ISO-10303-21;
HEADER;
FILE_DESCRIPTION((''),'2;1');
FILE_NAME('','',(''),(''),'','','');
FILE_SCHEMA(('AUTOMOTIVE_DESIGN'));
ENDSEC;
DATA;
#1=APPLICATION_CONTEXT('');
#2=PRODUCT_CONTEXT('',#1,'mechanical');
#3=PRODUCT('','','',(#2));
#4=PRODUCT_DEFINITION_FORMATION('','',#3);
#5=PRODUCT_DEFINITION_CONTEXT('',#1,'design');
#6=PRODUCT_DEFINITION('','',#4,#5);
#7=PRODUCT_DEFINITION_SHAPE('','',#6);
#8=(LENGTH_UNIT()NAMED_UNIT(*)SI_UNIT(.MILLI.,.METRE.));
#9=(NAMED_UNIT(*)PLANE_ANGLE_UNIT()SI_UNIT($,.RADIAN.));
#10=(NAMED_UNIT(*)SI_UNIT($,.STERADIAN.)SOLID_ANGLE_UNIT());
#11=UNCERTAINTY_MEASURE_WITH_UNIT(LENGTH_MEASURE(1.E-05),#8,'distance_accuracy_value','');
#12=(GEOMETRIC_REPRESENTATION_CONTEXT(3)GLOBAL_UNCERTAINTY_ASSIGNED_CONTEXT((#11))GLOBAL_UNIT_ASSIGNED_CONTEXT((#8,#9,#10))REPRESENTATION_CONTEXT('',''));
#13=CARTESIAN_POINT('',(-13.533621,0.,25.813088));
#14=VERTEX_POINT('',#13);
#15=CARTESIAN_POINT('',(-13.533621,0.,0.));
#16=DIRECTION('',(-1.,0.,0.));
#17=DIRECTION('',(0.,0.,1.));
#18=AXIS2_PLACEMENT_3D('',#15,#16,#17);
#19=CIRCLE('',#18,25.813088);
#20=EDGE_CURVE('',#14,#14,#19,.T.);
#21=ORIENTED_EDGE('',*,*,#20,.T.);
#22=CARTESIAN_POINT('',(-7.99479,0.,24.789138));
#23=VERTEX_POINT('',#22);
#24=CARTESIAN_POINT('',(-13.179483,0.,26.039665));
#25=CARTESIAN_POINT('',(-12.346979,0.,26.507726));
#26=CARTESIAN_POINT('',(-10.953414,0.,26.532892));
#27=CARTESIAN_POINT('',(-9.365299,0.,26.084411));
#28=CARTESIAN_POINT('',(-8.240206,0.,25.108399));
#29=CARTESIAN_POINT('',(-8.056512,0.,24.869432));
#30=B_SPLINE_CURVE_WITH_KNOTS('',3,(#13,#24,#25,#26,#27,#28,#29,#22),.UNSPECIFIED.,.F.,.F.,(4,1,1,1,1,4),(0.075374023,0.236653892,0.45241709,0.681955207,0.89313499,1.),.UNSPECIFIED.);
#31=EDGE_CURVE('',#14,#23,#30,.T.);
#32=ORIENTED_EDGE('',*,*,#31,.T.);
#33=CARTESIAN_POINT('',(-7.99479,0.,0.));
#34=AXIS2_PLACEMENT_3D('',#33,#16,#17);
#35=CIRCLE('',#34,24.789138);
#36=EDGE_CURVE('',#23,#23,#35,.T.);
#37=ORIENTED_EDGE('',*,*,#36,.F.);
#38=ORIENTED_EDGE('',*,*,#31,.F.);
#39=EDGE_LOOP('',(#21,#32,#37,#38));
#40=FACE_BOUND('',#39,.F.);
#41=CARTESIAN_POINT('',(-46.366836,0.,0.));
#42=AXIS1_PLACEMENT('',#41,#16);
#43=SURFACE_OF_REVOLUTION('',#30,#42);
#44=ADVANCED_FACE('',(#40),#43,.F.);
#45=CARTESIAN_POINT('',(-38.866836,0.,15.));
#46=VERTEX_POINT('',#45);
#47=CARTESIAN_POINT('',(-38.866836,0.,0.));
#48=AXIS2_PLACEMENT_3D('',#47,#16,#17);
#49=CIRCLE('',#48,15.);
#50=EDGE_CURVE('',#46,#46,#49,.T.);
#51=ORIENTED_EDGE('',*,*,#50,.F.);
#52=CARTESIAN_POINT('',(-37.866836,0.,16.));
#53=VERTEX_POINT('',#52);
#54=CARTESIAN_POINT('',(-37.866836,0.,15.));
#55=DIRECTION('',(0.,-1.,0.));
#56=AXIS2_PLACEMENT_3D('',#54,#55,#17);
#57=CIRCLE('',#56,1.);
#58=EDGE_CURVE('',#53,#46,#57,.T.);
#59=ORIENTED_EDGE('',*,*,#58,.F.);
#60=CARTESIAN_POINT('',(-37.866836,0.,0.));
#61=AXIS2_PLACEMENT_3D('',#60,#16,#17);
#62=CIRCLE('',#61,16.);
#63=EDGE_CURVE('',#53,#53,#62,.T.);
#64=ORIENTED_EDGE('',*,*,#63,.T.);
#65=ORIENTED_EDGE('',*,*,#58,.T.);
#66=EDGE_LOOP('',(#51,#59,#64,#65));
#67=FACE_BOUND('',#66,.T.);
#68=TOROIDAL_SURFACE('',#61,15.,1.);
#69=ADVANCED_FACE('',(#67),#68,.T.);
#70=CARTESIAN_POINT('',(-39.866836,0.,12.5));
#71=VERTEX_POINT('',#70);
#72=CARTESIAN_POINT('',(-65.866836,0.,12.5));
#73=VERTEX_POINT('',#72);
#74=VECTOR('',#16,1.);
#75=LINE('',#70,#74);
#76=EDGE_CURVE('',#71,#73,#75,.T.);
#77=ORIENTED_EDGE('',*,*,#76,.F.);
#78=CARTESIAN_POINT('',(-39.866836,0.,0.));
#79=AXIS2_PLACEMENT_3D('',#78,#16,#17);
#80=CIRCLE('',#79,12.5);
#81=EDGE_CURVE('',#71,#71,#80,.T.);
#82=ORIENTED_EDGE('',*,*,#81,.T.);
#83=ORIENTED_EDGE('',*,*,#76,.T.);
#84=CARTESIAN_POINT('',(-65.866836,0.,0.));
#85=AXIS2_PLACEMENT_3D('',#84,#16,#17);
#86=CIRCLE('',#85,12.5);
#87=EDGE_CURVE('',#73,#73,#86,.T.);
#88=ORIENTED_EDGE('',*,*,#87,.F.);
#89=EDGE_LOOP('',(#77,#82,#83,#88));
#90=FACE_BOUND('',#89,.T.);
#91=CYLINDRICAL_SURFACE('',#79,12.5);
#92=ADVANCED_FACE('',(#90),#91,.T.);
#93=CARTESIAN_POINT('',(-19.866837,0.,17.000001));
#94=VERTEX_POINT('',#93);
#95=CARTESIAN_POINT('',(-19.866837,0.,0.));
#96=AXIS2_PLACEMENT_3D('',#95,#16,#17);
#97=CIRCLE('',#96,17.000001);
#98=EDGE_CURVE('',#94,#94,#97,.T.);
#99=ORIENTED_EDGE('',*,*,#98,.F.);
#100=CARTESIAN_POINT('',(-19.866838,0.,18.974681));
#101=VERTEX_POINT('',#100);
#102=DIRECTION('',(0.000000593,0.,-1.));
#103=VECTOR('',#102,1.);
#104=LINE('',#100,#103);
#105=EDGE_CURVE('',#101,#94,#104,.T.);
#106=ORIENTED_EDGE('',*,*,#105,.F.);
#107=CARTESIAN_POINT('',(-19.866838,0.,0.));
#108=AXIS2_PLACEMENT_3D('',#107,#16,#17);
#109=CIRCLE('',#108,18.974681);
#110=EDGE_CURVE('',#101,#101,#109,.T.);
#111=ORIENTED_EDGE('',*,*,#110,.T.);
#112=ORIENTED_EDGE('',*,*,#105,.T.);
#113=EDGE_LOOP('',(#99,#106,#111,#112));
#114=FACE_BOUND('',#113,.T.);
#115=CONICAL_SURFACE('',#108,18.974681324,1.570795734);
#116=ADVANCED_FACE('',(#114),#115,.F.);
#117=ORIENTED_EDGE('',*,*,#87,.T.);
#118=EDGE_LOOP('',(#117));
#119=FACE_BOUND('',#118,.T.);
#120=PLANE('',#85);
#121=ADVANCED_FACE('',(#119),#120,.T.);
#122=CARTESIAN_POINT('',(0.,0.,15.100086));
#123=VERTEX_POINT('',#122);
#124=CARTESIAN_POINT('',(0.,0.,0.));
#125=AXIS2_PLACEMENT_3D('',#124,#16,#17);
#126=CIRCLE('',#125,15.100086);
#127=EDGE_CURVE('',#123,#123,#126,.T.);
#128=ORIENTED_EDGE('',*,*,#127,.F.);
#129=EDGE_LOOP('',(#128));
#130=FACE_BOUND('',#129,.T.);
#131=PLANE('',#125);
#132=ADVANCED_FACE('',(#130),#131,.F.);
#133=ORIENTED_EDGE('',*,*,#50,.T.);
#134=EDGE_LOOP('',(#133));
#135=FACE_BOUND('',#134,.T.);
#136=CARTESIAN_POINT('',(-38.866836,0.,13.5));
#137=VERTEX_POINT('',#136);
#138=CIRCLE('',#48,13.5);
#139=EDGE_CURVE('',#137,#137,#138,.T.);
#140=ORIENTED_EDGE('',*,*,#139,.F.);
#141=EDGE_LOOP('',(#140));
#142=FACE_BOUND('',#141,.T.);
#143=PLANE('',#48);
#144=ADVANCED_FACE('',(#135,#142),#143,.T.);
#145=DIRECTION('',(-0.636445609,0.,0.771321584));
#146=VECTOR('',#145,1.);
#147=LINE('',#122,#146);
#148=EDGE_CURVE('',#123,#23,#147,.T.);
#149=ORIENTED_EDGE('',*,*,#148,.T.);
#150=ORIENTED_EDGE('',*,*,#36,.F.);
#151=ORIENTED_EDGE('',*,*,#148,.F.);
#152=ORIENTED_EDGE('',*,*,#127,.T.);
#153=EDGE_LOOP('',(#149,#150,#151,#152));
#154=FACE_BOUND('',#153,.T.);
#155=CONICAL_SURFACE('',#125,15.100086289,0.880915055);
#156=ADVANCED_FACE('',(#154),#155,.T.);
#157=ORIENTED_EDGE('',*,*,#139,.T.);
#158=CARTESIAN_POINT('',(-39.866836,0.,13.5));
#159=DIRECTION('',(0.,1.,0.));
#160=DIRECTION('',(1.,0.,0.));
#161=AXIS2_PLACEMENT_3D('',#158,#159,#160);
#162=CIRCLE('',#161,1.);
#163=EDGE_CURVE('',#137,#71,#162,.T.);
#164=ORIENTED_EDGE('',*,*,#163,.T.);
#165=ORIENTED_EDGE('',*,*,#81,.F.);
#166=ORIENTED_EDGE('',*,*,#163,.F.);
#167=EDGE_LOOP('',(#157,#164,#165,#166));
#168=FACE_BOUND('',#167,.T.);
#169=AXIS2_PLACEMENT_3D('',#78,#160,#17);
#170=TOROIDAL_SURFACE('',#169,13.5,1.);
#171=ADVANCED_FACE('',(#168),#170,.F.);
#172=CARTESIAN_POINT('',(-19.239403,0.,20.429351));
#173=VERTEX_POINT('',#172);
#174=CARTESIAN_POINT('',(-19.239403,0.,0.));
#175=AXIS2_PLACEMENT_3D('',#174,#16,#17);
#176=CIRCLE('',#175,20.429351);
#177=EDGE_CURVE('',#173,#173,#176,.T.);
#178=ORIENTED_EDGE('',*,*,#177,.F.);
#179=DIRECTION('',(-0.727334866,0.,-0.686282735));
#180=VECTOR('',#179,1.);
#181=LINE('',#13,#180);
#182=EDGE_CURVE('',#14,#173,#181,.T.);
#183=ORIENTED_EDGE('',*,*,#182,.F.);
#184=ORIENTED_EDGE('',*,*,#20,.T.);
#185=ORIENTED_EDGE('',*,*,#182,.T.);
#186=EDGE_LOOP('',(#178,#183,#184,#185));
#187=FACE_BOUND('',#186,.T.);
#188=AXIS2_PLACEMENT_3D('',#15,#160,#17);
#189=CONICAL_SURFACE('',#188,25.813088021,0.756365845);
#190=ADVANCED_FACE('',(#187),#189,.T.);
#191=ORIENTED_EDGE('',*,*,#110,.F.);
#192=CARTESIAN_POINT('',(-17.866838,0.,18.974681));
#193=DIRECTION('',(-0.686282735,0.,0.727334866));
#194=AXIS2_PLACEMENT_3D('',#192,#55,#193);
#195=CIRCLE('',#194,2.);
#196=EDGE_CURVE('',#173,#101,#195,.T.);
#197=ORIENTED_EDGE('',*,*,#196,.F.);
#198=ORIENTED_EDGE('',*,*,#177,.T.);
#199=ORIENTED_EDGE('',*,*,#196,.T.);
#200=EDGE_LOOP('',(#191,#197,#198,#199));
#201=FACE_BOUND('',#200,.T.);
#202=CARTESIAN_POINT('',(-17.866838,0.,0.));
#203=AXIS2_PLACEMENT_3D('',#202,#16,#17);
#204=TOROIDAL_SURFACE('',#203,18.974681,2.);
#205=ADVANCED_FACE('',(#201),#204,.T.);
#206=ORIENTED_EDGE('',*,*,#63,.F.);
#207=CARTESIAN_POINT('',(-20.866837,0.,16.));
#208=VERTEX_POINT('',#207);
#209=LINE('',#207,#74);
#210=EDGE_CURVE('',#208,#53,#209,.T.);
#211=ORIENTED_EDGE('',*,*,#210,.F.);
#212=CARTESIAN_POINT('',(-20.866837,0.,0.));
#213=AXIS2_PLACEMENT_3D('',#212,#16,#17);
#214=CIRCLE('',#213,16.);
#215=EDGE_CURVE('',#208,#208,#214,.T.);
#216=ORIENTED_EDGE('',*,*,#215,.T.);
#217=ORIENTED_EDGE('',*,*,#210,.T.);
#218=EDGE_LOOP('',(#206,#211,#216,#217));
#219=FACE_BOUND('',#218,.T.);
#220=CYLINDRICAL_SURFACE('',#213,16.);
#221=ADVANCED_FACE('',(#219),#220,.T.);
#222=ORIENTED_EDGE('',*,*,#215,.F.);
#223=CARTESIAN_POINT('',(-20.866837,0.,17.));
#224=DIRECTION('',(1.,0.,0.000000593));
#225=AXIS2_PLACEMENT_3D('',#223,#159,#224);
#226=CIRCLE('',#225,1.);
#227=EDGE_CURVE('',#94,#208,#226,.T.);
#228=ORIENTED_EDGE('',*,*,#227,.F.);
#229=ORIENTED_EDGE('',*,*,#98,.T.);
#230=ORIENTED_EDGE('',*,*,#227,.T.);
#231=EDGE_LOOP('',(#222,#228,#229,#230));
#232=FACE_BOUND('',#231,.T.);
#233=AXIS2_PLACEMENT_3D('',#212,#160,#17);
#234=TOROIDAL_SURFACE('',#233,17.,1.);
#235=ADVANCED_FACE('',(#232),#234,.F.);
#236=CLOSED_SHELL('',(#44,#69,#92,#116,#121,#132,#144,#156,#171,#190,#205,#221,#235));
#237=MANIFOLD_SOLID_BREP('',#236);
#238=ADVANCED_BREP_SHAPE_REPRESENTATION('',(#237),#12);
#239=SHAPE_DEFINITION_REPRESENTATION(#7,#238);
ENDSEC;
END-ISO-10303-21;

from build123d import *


with BuildPart() as f1:
    # F0 (on Front) → F1 (revolve)
    with BuildSketch(Plane.XZ):
        with BuildLine():
            Line((0, 15.100086289), (-7.9947902337, 24.7891377658))
            add(Edge.make_bspline(
                [(-13.5336209388, 25.8130880211), (-13.1794829922, 26.0396653478), (-12.3469790571, 26.5077257402), (-10.9534140953, 26.5328921513), (-9.365299038, 26.0844114305), (-8.2402056984, 25.1083988869), (-8.0565123354, 24.8694320839), (-7.9947902337, 24.7891377658)],
                knots=[0.0753740232, 0.0753740232, 0.0753740232, 0.0753740232, 0.236653892, 0.4524170896, 0.6819552068, 0.89313499, 1, 1, 1, 1], degree=3))
            Line((-13.5336209388, 25.8130880211), (-19.239403379, 20.4293505417))
            ThreePointArc((-19.239403379, 20.4293505417), (-19.7032923995, 19.7667886958), (-19.8668379088, 18.9746813235))
            Line((-19.8668379088, 18.9746813235), (-19.8668367383, 17.0000005928))
            ThreePointArc((-19.8668367383, 17.0000005928), (-20.1597297475, 16.2928934284), (-20.8668367383, 16))
            Line((-20.8668367383, 16), (-37.8668361455, 16))
            ThreePointArc((-37.8668361455, 16), (-38.5739429267, 15.7071067812), (-38.8668361455, 15))
            Line((-38.8668361455, 15), (-38.8668361455, 13.5))
            ThreePointArc((-38.8668361455, 13.5), (-39.1597293643, 12.7928932188), (-39.8668361455, 12.5))
            Line((-39.8668361455, 12.5), (-65.8668361455, 12.5))
            Line((-65.8668361455, 12.5), (-65.8668361455, 0))
            Line((-65.8668361455, 0), (-26.8668361455, 0))
            Line((-26.8668361455, 0), (-19.8668361455, 0))
            Line((-19.8668361455, 0), (0, 0))
            Line((0, 0), (0, 15.100086289))
        make_face()
    revolve(axis=Axis((-46.3668361455, 0, 0), (-1, 0, 0)))


solid = f1.part
